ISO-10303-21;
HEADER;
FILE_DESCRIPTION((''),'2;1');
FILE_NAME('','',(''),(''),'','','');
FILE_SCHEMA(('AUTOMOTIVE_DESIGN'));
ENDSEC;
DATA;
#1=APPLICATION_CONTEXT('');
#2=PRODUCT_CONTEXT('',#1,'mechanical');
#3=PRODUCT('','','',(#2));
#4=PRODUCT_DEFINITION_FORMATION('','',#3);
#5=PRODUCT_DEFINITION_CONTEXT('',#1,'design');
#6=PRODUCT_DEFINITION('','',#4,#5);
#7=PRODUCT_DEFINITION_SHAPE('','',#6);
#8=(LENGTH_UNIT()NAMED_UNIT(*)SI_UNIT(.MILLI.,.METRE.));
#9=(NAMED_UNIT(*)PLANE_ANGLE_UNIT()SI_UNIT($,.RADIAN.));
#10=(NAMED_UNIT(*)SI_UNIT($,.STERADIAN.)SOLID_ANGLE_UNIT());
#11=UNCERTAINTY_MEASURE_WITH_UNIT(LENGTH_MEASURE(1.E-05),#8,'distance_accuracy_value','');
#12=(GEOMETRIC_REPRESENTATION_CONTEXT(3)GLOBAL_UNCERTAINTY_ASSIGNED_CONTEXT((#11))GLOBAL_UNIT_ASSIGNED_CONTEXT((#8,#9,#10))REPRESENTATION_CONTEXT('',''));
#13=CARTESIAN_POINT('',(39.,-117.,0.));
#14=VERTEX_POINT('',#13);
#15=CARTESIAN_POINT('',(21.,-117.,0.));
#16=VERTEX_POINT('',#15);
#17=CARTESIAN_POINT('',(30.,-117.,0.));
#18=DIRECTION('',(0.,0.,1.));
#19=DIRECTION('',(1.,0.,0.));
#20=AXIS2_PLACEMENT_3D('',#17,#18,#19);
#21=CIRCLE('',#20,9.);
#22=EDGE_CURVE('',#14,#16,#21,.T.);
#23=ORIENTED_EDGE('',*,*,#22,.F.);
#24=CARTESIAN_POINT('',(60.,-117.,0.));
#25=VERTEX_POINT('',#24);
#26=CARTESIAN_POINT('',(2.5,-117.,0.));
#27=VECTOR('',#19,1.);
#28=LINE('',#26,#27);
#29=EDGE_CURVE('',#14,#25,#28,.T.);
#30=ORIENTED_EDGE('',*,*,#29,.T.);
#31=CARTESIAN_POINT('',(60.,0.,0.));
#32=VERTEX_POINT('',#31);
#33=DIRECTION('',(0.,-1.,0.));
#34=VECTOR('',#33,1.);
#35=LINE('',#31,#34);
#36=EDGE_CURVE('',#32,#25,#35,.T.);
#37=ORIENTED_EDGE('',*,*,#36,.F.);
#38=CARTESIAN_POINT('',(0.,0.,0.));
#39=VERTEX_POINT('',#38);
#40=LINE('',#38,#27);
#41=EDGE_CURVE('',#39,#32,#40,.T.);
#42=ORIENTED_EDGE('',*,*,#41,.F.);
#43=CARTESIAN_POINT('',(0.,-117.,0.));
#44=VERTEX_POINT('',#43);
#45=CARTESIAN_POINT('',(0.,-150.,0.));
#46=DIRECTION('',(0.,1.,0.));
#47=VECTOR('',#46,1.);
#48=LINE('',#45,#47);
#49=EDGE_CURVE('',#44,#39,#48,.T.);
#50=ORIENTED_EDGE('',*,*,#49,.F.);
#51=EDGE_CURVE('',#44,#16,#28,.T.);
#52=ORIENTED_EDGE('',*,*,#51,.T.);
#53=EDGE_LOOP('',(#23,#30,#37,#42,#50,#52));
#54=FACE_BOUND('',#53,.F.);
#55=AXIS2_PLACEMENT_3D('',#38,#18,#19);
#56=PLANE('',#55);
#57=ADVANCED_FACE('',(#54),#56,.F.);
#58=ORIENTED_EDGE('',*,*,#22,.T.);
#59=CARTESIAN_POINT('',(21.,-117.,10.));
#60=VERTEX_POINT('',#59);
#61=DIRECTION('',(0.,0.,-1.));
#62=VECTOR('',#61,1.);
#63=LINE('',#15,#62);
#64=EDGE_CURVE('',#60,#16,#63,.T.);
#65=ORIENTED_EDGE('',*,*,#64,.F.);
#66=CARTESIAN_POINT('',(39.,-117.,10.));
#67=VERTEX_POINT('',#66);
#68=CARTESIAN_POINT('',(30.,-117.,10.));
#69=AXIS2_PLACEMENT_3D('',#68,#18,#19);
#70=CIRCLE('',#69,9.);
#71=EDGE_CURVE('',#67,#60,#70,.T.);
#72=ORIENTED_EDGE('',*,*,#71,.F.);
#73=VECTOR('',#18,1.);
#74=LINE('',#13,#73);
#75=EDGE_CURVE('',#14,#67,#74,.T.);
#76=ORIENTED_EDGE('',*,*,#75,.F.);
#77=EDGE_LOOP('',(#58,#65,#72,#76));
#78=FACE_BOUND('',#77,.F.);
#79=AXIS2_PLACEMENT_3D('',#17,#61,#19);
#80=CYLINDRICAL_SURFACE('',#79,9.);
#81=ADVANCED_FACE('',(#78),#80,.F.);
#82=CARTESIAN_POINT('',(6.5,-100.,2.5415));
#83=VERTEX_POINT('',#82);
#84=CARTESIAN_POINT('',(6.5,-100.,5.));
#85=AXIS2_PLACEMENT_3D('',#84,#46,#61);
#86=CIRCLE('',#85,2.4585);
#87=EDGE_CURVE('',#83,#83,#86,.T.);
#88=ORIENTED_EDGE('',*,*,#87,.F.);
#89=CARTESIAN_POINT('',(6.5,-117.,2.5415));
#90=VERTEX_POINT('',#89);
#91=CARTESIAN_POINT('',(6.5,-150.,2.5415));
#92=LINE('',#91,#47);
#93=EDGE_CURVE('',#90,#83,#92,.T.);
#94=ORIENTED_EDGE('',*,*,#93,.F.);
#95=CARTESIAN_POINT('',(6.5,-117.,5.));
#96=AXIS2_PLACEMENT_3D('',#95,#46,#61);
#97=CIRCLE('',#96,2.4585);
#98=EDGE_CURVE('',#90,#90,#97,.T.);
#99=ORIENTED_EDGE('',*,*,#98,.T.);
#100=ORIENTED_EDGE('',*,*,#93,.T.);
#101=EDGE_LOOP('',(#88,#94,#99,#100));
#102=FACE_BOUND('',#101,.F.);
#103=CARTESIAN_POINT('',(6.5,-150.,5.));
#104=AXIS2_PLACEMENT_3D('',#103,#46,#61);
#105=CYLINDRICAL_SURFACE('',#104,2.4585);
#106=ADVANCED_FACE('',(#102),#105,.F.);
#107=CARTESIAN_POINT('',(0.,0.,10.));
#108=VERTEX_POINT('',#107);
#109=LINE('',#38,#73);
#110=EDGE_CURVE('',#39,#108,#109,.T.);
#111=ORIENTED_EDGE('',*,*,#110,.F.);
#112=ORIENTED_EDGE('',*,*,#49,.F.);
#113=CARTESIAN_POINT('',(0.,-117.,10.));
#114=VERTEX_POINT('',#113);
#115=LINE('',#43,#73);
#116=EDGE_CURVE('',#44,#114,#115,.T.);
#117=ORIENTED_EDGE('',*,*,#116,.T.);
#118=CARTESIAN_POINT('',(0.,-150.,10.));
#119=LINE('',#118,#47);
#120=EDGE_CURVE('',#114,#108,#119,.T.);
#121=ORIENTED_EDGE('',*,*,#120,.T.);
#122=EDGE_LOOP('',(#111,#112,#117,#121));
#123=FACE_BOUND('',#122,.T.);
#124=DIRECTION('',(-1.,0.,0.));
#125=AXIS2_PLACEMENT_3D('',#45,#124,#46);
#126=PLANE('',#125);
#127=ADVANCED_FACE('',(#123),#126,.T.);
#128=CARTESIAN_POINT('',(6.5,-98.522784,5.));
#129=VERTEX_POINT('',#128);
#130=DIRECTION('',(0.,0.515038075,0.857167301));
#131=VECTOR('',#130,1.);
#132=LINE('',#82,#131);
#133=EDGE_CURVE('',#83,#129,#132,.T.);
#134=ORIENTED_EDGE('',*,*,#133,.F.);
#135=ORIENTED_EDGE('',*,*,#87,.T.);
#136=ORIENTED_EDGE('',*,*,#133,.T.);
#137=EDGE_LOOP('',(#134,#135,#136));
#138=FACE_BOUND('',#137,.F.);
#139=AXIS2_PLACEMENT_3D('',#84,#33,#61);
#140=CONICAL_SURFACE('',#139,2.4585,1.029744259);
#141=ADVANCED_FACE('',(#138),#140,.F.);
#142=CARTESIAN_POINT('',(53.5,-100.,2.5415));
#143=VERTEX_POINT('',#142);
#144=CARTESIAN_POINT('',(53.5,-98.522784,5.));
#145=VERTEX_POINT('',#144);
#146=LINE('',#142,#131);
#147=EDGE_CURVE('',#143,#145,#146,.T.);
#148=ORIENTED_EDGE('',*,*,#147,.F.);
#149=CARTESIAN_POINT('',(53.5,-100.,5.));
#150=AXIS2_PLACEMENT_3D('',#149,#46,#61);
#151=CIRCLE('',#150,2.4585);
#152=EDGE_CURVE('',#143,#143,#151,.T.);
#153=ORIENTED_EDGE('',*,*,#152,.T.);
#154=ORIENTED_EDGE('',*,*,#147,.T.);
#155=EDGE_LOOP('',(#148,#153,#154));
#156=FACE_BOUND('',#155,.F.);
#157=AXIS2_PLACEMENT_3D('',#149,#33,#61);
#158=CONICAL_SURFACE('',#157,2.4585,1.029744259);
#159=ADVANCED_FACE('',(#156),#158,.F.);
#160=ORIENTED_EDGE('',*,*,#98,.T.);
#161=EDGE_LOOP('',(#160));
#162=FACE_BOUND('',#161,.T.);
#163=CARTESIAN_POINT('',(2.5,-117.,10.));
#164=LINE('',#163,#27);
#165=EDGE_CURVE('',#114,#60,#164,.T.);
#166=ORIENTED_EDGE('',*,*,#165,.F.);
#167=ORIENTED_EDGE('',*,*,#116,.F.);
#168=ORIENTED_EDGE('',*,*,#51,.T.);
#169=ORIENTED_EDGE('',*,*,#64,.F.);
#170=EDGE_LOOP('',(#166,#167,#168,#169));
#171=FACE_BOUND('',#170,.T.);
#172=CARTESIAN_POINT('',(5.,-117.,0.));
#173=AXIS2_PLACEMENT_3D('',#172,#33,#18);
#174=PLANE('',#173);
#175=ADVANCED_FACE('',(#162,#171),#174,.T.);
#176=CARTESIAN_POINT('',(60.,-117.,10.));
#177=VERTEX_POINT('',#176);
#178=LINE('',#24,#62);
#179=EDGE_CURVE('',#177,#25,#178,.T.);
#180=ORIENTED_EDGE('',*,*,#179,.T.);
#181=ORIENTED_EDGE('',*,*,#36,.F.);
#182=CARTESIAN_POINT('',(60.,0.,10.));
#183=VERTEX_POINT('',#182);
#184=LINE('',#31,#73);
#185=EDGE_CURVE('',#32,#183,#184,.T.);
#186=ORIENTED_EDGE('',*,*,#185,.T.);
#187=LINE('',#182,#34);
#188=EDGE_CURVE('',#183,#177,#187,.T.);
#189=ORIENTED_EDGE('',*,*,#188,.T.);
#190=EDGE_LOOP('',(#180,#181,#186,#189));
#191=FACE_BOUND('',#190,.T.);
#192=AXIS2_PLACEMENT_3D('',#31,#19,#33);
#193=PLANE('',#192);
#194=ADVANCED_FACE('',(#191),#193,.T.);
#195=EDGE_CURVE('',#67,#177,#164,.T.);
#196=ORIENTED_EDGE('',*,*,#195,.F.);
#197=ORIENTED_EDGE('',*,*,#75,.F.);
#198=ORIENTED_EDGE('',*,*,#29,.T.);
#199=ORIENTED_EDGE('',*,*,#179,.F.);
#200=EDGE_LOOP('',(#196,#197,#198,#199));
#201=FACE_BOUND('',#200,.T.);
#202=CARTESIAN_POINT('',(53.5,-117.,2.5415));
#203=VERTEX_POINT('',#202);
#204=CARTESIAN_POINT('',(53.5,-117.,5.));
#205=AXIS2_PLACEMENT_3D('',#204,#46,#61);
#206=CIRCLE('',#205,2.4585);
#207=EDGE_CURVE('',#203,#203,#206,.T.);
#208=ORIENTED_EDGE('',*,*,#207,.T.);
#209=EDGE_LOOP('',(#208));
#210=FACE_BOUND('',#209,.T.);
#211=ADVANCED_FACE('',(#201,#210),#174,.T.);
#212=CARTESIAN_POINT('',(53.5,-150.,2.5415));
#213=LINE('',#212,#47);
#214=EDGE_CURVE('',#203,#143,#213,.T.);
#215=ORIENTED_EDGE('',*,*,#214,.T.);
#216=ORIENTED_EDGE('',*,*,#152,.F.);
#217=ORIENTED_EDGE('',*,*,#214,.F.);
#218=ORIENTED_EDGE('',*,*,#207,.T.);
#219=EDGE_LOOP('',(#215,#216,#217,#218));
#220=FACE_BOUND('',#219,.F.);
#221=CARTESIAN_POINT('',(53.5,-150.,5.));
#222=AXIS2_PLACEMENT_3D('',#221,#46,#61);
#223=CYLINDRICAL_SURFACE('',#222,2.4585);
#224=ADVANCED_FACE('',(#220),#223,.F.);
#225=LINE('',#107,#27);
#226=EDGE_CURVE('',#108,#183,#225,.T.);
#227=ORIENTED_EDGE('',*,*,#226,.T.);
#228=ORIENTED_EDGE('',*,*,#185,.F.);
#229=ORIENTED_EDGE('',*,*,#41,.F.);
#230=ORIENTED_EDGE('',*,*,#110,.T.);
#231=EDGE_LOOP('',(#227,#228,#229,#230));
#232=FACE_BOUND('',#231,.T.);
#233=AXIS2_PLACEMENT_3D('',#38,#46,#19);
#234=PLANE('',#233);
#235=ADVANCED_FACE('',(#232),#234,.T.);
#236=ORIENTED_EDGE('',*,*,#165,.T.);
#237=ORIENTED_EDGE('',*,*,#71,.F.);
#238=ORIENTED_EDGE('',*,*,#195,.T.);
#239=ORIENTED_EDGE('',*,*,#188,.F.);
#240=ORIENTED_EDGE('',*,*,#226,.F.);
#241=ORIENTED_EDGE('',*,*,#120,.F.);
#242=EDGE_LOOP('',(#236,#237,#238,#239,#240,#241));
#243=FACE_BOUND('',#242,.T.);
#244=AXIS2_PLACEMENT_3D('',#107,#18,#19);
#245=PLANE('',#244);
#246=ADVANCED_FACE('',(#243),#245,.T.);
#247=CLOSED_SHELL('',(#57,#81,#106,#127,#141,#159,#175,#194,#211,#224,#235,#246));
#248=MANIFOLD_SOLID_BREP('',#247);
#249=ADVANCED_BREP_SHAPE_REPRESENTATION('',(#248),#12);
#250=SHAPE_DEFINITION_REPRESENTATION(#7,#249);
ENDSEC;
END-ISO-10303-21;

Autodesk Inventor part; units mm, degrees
ref_plane "YZ Plane" through (0, 0, 0) normal (1, 0, 0) x (0, 1, 0)
ref_plane "XZ Plane" through (0, 0, 0) normal (0, 1, 0) x (-1, 0, 0)
sketch "Skizze1" plane through (0, 0, 0) normal (0, 0, 1) x (1, 0, 0)
  line L0 (0, 0) -> (60, 0)
  line L1 (60, 0) -> (60, -150)
  line L2 (60, -150) -> (0, -150)
  line L3 (0, -150) -> (0, 0)
  circle A0 centre (30, -117) radius 9
  dimension "d0" = 60
  dimension "d1" = 150
  dimension "d2" = 18
extrude "Extrusion1" add sketch "Skizze1" along normal blind 10
sketch "Skizze2" plane through (0, -150, 0) normal (0, -1, 0) x (1, 0, 0)
  point P0 (0, 0)
  point P1 (6.5, 5)
  point P2 (53.5, 5)
hole "Bohrung1" at (6.5, -150, 5) at (53.5, -150, 5) direction (0, 1, 0) diameter 4.917 depth 50 tip angle 118 thread size "M6x1" class "6H" standard "ISO Metric profile"
sketch "Skizze3" plane through (0, 0, 0) normal (0, 0, -1) x (-1, 0, 0)
  line L0 (-5, -117) -> (-55, -117)
  point P0 (0, 0)
ref_plane "Arbeitsebene1" through (5, -117, 0) normal (0, 1, 0) x (1, 0, 0)
split "Trennen1" plane through (5, -117, 0) removes the side toward (0, -1, 0)
properties part number "Steher oben Rohr"
